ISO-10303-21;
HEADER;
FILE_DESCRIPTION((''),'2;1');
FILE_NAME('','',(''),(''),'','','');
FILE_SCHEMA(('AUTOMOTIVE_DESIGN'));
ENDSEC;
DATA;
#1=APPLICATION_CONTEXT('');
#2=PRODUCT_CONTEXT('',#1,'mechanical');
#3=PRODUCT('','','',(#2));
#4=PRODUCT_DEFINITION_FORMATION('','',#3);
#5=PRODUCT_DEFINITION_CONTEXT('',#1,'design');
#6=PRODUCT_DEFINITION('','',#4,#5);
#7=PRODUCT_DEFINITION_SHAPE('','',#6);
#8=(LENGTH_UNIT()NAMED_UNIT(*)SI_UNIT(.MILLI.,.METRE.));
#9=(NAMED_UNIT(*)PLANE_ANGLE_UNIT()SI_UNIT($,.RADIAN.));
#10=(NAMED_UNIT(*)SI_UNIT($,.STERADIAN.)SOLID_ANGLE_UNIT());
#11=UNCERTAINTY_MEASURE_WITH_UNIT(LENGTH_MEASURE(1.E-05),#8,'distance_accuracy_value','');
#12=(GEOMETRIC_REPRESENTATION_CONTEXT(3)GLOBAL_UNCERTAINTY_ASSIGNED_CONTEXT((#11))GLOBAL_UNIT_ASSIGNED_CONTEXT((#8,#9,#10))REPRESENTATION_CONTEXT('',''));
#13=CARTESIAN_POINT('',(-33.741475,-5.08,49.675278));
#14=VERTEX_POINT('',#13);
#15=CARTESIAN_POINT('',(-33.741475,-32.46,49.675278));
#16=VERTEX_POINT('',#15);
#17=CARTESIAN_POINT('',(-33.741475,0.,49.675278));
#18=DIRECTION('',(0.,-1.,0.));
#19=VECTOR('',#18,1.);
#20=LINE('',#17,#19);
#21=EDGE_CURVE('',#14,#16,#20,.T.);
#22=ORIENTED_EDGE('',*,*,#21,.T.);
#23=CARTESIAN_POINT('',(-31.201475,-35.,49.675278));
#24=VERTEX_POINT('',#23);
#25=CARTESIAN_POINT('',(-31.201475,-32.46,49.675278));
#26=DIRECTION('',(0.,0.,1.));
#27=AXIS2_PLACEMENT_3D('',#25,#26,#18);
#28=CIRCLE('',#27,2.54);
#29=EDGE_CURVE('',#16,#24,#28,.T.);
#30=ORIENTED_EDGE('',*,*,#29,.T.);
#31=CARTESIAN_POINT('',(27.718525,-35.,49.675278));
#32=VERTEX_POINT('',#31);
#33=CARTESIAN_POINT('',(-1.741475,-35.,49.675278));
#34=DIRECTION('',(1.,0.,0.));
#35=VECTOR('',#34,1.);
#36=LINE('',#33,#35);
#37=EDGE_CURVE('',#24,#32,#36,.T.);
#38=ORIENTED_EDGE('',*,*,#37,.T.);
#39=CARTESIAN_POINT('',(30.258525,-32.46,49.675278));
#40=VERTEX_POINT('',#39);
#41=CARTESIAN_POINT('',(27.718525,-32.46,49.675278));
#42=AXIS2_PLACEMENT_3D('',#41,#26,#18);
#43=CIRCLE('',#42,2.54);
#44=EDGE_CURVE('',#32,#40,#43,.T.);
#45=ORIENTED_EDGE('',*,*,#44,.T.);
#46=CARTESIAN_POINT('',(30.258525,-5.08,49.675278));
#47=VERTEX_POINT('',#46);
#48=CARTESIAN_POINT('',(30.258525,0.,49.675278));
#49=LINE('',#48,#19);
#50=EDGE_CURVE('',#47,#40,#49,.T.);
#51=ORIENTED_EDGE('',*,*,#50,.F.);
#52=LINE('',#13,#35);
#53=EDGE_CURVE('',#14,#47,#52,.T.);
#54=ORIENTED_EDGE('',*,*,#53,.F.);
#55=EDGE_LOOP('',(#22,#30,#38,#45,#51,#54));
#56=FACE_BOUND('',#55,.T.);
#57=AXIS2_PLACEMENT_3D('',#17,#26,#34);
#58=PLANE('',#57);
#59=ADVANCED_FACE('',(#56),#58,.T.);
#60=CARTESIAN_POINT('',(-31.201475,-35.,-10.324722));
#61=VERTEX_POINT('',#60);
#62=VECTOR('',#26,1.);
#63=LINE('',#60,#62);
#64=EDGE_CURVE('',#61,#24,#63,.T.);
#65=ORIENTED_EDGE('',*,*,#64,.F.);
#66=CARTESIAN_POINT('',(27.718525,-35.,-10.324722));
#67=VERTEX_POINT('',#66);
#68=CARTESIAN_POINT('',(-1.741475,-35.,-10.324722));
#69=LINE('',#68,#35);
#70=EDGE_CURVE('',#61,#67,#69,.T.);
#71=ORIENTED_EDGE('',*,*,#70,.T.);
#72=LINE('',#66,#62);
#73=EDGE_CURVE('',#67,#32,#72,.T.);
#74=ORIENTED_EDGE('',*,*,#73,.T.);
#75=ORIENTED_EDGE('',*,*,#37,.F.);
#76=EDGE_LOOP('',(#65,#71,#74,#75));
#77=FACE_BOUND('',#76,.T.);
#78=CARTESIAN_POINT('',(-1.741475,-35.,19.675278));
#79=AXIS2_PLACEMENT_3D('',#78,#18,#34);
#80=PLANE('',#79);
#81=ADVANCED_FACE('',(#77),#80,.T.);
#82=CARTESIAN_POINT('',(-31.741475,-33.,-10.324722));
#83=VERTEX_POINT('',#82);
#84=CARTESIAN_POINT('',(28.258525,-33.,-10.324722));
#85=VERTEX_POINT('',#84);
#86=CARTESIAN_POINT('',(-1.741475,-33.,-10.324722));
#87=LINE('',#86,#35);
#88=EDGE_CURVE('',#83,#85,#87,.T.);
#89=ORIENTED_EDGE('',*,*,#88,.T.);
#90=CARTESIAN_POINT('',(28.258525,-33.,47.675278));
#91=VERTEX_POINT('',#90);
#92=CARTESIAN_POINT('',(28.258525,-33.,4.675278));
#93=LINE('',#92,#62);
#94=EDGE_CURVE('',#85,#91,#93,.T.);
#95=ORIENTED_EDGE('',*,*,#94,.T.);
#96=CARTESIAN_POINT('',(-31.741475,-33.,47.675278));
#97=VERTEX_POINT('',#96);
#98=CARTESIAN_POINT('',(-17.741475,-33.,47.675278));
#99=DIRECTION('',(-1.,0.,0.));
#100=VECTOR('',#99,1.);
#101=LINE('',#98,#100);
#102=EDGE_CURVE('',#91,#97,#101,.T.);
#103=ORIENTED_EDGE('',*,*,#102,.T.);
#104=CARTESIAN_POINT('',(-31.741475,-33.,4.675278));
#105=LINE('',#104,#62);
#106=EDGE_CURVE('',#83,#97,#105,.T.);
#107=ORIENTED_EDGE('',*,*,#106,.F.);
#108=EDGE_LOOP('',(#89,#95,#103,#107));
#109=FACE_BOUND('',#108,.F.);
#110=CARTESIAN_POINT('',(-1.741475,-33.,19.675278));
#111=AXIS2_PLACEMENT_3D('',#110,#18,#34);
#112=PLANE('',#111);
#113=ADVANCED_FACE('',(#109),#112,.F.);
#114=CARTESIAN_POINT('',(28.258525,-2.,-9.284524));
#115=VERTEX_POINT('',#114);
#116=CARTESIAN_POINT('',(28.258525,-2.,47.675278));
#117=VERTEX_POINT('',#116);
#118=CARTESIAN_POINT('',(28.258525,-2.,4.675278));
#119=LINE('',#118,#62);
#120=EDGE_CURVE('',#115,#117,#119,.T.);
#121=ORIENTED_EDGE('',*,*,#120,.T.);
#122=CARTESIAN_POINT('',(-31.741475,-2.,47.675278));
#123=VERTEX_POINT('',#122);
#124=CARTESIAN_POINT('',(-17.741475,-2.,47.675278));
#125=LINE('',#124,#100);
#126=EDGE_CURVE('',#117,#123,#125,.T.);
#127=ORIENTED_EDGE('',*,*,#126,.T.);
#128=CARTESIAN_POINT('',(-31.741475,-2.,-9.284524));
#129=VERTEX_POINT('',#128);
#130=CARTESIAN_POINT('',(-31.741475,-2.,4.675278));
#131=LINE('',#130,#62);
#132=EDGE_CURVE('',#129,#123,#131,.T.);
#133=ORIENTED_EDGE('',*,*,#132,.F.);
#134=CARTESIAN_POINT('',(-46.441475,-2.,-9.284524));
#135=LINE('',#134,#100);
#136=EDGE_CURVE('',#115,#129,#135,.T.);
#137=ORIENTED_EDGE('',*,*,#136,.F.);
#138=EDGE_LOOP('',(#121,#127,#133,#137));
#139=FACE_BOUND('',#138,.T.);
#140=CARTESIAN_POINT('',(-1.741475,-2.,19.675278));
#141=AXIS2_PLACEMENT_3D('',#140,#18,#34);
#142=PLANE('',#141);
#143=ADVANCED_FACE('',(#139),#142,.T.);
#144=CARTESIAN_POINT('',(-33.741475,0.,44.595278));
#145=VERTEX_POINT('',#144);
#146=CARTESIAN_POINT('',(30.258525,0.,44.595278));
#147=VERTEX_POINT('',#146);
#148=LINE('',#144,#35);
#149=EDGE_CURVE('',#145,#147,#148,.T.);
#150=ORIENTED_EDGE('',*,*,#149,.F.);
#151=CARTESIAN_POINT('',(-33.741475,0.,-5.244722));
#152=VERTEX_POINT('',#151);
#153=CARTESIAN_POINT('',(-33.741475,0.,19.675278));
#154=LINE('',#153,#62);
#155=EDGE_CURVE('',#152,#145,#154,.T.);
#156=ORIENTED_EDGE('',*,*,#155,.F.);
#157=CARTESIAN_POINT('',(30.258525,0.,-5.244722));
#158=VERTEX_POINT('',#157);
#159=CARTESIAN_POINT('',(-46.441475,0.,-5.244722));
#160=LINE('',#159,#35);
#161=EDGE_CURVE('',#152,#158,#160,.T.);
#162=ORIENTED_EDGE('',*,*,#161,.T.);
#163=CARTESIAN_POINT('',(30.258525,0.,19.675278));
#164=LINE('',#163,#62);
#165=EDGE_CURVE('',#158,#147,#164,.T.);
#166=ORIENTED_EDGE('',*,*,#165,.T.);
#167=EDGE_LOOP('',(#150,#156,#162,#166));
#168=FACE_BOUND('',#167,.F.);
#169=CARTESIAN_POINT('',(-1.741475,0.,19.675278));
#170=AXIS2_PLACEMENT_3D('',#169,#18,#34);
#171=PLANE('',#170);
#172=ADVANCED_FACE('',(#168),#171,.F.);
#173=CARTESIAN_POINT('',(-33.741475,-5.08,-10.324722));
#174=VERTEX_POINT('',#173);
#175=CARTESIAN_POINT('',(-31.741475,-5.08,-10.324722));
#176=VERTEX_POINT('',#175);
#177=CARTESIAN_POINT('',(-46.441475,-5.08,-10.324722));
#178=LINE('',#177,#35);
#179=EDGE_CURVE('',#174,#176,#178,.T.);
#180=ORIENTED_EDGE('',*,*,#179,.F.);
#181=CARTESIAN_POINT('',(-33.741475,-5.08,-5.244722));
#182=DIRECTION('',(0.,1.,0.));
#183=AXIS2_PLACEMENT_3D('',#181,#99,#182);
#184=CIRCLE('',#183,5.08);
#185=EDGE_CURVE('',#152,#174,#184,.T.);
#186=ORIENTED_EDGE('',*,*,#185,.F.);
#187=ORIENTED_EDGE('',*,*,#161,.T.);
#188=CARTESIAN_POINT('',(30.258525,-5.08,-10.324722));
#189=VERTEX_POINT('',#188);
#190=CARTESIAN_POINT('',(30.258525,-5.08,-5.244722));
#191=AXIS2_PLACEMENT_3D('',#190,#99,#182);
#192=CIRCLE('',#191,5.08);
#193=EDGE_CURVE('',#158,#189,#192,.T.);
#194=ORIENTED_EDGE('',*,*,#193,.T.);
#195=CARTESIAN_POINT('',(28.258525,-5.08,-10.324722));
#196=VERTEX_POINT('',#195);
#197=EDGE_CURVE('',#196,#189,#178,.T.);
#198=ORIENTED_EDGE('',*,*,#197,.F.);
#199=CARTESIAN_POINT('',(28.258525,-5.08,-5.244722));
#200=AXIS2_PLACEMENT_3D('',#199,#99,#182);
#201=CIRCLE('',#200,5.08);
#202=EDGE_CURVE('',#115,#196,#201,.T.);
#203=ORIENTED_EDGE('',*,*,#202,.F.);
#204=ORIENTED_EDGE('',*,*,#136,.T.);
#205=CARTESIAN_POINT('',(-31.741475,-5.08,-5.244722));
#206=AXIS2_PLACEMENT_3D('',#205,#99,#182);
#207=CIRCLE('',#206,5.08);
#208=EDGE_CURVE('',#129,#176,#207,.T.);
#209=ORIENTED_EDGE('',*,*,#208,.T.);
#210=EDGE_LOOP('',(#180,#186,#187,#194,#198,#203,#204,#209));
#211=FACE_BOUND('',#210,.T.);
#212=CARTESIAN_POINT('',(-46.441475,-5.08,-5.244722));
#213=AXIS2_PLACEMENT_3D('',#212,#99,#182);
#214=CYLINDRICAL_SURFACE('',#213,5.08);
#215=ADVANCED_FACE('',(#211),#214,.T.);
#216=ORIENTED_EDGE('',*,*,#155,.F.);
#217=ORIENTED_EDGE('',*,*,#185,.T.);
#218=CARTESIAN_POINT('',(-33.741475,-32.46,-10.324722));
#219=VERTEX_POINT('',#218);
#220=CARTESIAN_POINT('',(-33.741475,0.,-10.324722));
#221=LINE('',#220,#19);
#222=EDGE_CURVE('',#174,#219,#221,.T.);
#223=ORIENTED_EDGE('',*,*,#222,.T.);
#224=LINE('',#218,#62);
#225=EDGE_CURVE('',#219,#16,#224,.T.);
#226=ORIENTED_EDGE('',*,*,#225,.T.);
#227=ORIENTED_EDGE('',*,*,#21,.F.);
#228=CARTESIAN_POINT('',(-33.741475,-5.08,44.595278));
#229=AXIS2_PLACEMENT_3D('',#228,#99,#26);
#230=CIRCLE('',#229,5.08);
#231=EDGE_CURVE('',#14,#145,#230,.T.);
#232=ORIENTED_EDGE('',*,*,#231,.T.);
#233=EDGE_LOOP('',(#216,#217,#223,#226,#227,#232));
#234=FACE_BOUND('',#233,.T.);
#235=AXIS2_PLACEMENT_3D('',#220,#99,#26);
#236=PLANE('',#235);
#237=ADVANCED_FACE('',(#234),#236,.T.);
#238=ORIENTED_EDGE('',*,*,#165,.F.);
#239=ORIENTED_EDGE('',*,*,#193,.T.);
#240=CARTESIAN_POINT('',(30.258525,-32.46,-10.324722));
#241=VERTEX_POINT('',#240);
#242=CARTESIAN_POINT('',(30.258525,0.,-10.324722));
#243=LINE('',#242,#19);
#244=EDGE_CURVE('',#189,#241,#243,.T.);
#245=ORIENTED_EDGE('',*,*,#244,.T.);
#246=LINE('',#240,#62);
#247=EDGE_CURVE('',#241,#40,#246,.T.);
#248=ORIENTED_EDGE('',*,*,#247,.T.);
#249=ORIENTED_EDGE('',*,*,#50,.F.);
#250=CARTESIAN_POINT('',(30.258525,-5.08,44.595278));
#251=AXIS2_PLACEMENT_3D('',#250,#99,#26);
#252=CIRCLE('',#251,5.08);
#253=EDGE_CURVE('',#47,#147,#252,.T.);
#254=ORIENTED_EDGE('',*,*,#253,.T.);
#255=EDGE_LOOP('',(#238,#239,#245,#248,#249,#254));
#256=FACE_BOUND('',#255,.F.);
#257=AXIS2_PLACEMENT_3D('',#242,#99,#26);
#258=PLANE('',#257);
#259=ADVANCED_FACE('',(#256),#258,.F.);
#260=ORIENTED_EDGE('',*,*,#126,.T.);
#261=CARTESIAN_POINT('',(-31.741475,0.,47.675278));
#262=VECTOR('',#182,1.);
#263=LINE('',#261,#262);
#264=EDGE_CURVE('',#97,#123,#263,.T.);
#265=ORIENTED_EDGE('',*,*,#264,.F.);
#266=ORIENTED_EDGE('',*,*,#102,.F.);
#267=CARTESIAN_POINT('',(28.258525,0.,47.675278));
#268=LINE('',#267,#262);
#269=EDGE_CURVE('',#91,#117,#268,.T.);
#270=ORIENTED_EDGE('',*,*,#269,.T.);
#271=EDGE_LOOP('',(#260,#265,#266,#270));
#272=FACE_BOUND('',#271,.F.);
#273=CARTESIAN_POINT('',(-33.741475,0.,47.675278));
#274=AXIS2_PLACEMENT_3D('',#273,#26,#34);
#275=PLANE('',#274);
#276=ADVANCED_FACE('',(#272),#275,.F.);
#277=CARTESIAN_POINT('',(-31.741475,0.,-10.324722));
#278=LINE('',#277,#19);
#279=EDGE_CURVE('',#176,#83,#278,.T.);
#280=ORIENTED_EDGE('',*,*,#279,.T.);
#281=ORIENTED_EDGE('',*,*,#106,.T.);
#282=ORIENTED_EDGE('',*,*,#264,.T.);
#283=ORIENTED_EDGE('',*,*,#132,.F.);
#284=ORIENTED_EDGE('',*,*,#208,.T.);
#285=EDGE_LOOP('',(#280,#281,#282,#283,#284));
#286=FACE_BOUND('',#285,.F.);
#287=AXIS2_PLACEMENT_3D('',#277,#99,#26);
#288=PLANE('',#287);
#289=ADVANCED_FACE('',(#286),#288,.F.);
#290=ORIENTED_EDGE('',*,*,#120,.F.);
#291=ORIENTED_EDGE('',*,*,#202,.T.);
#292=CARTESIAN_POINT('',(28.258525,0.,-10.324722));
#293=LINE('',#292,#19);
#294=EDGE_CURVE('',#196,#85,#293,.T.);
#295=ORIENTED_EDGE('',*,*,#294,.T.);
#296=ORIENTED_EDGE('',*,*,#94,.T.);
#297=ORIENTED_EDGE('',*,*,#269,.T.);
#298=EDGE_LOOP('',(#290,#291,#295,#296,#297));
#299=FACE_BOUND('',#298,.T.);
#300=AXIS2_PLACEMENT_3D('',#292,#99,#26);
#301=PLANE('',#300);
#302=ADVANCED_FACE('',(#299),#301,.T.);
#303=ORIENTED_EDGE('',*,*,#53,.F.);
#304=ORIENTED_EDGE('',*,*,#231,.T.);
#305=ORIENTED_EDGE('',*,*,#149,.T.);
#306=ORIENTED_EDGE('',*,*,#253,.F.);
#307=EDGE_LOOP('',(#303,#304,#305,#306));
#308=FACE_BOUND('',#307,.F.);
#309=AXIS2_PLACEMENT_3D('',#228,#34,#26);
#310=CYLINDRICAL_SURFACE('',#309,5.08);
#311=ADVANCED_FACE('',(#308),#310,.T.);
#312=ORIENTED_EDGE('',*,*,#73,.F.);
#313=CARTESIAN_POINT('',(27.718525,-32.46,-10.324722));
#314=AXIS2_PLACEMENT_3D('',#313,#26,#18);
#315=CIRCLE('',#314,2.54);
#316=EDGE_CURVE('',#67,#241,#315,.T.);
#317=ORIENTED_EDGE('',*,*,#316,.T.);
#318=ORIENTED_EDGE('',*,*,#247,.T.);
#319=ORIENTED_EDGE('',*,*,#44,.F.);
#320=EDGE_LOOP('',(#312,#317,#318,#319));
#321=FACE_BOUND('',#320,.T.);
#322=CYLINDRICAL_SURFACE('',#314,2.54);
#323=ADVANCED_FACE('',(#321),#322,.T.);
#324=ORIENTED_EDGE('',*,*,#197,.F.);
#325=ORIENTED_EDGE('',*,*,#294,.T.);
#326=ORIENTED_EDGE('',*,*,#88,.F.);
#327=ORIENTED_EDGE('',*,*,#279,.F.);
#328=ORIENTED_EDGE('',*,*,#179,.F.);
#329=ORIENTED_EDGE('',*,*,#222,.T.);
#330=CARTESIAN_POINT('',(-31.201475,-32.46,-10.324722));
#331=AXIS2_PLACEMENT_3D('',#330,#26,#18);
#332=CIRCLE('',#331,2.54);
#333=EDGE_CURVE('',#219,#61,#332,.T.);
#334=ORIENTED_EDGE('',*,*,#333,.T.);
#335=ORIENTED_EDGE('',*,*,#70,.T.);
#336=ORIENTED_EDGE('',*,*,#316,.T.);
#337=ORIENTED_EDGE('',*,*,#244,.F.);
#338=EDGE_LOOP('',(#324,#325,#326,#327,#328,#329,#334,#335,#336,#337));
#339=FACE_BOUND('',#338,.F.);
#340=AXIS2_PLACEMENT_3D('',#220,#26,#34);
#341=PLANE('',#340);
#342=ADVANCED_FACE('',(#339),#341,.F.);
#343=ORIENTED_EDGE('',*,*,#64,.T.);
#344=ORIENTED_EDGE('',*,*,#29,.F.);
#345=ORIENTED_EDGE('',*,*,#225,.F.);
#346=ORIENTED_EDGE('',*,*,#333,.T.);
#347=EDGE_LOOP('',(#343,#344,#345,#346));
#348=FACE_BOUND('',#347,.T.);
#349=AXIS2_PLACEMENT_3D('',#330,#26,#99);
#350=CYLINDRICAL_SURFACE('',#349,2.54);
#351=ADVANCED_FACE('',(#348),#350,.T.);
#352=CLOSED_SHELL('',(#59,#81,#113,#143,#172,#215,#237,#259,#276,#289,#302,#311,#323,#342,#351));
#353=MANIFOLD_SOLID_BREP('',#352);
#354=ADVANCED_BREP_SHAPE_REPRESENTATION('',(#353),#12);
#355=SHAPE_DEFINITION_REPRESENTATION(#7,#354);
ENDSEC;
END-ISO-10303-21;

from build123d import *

# Parameters (mm, degrees)
F0_W        = 64
F0_H        = 60
F1_DEPTH    = 35
F2_T        = -2
F3_R        = 5.08
F4_T1_DEPTH = 89.4
F5_R        = 2.54


# Not quite as in the source:
# - a fillet or chamfer that OpenCascade refuses, or shapes differently, is made with other operations: its cross-section is extruded or revolved along the edge and cut away or added


with BuildPart() as f1:
    # F0 (on Front) → F1 (new body)
    with BuildSketch(Plane.XZ):
        with Locations((-1.7414748222, 19.6752779907)):
            Rectangle(F0_W, F0_H)
    extrude(amount=F1_DEPTH)

    # F2
    f2_openings = [f1.faces().sort_by_distance(p)[0] for p in [
        (-1.741475, -17.5, -10.324722),
    ]]
    offset(amount=F2_T, openings=f2_openings)

    # F3
    f3_edges = [f1.edges().sort_by_distance(p)[0] for p in [
        (-1.741475, 0, 49.675278),
    ]]
    fillet(f3_edges, radius=F3_R)

    # F4: fillet of radius 5.08 on 1 edges, made by hand

    # F4_s2 → F4_t1 (cut)
    with BuildSketch(Plane.YZ.offset(-46.4414748222)):
        with BuildLine():
            ThreePointArc((0, -5.2447220093), (-1.4878975516, -8.8368244577), (-5.08, -10.3247220093))
            Line((-5.08, -10.3247220093), (0, -10.3247220093))
            Line((0, -10.3247220093), (0, -5.2447220093))
        make_face()
    extrude(amount=F4_T1_DEPTH, mode=Mode.SUBTRACT)

    # F5
    f5_edges = [f1.edges().sort_by_distance(p)[0] for p in [
        (-33.741475, -35, 19.675278),
        (30.258525, -35, 19.675278),
    ]]
    fillet(f5_edges, radius=F5_R)


solid = f1.part
